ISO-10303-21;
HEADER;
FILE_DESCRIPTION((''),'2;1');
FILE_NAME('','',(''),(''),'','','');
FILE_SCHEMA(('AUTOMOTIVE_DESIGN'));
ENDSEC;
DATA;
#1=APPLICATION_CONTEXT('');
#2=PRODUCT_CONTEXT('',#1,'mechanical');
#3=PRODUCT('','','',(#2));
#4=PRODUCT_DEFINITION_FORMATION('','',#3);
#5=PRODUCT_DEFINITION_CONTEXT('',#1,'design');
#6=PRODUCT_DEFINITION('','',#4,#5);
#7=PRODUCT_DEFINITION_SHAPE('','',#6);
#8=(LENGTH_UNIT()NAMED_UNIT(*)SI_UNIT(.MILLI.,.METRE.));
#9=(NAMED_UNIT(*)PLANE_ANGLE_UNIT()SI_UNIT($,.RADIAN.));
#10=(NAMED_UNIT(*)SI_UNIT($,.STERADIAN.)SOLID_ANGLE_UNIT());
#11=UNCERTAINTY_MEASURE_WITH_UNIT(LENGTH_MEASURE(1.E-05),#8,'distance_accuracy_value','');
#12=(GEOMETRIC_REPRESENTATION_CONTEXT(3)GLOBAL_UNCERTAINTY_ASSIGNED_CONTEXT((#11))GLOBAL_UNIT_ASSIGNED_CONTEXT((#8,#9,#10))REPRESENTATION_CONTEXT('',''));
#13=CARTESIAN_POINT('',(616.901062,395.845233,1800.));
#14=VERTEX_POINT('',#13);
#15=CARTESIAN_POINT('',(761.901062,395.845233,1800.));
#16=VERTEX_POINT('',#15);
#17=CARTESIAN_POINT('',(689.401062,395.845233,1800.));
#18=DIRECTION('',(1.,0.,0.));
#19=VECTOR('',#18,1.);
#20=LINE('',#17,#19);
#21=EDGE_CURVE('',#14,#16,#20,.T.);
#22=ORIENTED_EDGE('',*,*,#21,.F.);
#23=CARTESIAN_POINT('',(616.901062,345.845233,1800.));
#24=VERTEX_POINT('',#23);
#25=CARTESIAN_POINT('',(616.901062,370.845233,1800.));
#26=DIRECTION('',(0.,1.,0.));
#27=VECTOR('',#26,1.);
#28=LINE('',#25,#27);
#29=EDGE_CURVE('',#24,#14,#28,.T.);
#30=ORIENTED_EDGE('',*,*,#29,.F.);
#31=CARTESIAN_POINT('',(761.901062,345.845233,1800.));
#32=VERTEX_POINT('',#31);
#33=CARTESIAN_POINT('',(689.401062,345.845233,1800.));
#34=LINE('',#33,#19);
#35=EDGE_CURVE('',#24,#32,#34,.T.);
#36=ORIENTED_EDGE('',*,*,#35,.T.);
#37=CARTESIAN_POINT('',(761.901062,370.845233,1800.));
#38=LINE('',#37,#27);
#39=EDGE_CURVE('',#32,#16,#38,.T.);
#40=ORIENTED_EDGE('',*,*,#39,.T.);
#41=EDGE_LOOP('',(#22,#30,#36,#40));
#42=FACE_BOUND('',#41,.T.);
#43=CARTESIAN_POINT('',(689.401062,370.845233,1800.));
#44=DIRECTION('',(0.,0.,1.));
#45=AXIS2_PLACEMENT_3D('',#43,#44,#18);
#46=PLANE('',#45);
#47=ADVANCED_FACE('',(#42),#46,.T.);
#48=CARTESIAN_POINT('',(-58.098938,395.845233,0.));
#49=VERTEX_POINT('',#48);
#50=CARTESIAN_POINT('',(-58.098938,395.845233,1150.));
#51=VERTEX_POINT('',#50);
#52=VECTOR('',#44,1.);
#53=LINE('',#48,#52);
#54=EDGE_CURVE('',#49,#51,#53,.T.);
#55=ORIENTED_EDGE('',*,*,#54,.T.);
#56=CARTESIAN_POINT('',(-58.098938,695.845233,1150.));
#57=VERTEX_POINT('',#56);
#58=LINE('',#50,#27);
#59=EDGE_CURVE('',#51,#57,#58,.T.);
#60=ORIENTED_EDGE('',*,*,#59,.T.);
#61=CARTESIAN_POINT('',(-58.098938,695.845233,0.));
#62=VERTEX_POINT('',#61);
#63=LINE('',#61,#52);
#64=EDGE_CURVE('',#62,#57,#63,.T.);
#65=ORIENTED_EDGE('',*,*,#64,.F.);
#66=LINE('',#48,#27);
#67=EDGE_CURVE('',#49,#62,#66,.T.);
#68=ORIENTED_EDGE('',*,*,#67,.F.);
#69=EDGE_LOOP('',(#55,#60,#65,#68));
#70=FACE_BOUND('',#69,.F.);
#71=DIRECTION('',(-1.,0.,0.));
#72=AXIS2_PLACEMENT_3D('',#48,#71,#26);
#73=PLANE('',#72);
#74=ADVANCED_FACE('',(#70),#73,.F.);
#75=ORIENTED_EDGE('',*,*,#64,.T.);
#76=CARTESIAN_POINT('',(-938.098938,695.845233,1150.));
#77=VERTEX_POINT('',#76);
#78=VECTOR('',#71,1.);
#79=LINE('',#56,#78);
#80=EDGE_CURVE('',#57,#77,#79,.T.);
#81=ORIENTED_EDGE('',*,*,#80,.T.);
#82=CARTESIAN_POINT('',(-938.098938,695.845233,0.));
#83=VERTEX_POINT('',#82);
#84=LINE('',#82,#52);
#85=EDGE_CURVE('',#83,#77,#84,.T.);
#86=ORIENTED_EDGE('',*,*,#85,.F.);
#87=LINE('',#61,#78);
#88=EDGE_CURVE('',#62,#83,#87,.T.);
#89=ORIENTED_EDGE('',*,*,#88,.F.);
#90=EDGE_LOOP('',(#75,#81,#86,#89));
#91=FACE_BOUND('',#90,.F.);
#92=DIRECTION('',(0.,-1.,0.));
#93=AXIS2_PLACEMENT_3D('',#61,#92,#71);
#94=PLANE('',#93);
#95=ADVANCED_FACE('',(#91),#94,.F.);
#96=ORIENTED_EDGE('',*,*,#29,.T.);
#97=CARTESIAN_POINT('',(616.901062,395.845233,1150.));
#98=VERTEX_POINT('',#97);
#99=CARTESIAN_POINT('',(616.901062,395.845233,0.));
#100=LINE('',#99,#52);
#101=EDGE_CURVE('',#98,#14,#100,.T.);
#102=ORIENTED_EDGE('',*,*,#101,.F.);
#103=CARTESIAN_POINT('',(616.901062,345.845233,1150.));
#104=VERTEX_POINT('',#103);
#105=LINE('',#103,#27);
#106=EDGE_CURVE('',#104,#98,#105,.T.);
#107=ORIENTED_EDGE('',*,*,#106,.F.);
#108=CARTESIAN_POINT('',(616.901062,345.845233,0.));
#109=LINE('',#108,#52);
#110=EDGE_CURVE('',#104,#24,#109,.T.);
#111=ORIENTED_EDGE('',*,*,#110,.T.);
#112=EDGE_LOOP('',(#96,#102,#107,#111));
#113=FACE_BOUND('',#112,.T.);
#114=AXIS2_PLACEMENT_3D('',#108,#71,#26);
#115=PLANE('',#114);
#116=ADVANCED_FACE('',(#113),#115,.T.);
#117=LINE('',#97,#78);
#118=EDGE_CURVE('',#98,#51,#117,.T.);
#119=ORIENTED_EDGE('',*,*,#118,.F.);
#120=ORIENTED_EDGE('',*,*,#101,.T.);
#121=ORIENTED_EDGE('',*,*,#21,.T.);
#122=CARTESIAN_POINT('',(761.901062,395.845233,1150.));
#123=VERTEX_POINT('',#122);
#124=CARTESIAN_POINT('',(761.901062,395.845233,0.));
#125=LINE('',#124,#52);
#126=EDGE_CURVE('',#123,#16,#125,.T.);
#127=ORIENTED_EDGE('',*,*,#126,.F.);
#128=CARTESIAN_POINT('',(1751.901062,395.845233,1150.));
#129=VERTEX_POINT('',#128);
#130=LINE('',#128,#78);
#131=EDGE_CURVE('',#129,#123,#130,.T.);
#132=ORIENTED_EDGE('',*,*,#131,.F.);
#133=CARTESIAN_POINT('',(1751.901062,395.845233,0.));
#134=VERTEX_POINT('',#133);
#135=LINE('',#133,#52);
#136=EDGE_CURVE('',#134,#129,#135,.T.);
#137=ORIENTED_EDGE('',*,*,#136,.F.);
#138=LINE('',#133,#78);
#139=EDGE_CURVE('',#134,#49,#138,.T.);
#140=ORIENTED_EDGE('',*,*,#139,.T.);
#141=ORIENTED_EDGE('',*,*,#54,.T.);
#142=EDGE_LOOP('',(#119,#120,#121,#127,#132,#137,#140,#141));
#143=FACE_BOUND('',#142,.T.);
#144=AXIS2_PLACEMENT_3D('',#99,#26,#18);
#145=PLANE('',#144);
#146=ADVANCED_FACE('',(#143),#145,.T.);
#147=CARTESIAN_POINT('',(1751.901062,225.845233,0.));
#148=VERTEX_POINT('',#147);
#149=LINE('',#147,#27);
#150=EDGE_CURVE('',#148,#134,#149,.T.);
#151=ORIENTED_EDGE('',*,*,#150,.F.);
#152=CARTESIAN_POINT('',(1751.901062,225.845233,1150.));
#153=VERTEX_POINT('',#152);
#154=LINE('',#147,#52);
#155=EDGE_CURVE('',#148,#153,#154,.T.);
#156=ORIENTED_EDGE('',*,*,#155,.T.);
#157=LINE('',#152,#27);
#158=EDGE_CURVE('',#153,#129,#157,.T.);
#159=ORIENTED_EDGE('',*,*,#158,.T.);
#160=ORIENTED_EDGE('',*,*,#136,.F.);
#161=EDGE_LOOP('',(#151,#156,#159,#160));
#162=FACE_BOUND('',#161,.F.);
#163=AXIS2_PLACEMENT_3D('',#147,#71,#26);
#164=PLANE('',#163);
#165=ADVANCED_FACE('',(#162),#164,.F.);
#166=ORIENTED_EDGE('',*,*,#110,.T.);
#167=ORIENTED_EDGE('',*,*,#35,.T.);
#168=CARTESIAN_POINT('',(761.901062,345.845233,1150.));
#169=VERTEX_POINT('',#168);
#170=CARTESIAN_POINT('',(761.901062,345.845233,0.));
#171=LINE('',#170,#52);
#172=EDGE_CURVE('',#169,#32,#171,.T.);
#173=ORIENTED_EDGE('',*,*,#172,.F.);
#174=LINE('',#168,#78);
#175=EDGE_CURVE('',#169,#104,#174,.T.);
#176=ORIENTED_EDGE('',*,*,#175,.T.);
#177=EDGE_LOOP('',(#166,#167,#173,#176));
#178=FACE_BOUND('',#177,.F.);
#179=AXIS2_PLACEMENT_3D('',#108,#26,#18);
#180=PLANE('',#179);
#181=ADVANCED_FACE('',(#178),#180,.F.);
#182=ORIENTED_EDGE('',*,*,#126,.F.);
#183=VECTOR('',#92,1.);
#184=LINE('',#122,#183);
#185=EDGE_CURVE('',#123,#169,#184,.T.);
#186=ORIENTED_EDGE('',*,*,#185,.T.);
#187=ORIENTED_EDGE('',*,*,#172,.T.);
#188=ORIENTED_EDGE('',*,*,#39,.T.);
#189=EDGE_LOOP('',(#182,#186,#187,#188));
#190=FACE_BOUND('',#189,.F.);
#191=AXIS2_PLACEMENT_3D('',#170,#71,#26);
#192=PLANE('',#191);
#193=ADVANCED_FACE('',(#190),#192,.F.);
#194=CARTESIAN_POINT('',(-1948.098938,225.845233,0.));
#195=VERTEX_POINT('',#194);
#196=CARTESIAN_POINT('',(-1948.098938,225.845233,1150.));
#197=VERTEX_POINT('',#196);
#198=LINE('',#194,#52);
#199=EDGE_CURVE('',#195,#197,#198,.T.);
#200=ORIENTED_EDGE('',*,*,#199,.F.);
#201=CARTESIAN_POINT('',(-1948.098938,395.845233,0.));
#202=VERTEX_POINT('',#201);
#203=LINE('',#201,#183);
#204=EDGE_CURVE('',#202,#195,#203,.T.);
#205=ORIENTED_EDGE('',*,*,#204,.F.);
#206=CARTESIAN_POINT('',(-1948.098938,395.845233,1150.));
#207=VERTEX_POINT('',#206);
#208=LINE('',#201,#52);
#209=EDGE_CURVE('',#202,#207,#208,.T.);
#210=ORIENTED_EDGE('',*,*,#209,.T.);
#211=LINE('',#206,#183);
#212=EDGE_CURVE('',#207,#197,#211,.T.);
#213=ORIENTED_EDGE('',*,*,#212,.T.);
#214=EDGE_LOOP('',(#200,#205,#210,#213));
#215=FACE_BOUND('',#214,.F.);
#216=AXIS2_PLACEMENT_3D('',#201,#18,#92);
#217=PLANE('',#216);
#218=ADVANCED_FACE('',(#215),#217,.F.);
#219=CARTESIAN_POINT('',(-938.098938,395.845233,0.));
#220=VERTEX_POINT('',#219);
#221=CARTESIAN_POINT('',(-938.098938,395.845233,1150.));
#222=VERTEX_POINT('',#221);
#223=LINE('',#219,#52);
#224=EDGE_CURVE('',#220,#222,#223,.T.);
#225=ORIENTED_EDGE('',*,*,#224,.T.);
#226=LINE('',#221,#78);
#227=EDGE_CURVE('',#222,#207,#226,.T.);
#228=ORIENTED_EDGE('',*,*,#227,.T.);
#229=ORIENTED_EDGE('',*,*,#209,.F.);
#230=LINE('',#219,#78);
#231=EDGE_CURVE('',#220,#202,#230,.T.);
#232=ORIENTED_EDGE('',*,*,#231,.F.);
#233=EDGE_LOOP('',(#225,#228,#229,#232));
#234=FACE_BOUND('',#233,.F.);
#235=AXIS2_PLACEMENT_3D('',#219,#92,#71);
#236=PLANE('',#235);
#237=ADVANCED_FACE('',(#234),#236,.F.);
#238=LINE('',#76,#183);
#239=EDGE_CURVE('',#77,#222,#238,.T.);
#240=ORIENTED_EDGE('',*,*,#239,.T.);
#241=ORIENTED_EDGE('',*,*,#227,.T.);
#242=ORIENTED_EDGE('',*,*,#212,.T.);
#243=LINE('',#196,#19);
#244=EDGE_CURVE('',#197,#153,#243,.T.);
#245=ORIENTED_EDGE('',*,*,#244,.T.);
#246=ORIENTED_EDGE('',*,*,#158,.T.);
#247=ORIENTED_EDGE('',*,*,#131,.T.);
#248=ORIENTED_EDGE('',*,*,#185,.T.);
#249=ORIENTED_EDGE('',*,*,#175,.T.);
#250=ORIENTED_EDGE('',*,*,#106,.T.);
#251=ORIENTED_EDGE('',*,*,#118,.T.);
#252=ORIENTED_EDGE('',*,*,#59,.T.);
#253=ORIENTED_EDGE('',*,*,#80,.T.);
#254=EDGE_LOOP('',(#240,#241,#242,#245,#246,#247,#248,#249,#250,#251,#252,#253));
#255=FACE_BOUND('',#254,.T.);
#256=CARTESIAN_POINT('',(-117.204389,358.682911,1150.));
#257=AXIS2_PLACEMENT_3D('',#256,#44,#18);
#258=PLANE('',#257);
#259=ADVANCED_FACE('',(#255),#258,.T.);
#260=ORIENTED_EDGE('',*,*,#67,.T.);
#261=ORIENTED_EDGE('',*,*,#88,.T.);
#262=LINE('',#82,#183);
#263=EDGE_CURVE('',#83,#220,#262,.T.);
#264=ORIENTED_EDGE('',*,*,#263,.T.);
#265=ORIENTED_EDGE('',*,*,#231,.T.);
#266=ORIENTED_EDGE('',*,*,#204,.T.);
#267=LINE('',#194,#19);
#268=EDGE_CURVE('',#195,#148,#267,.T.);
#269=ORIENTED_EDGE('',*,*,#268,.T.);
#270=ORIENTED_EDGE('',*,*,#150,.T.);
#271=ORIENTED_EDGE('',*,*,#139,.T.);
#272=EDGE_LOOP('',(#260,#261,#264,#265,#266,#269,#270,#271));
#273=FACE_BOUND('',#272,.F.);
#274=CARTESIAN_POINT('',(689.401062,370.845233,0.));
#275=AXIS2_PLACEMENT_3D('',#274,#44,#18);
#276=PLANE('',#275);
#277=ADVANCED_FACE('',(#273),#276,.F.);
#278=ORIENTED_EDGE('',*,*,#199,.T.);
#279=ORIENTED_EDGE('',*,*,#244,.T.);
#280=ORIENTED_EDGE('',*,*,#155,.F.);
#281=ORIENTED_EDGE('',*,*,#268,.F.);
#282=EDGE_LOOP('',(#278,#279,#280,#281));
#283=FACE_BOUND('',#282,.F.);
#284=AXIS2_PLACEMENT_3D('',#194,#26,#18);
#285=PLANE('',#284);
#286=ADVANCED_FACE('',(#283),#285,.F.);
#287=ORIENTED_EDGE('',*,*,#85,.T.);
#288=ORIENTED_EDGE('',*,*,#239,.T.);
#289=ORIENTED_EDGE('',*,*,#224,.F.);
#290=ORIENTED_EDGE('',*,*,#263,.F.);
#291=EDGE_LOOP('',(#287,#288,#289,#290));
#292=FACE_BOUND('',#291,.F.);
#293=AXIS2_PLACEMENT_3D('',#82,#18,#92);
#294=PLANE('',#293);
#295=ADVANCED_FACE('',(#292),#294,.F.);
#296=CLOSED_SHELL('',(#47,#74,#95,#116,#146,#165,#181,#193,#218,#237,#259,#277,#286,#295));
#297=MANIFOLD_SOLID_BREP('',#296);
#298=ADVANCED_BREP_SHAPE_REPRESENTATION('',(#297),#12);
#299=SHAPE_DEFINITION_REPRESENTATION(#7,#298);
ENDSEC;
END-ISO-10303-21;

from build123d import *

# Parameters (mm, degrees)
F1_DEPTH = 1150
F0_W     = 145
F0_H     = 50
F2_DEPTH = 1800


# Not quite as in the source:
# - the program builds the solid bodies; features that only make, move or delete a surface that nothing else refers to are left out


with BuildPart() as f1:
    # F0 (on Top) → F1 (new body)
    with BuildSketch(Plane.XY):
        Polygon((-938.0989384058, 395.8452334432), (-1948.0989384058, 395.8452334432), (-1948.0989384058, 225.8452334432), (1751.9010615942, 225.8452334432), (1751.9010615942, 395.8452334432), (761.9010615942, 395.8452334432), (761.9010615942, 345.8452334432), (616.9010615942, 345.8452334432), (616.9010615942, 395.8452334432), (-58.0989384058, 395.8452334432), (-58.0989384058, 695.8452334432), (-938.0989384058, 695.8452334432), align=None)
    extrude(amount=F1_DEPTH)

    # F0 (on Top) → F2 (join)
    with BuildSketch(Plane.XY):
        with Locations((689.4010615942, 370.8452334432)):
            Rectangle(F0_W, F0_H)
    extrude(amount=F2_DEPTH)


solid = f1.part
